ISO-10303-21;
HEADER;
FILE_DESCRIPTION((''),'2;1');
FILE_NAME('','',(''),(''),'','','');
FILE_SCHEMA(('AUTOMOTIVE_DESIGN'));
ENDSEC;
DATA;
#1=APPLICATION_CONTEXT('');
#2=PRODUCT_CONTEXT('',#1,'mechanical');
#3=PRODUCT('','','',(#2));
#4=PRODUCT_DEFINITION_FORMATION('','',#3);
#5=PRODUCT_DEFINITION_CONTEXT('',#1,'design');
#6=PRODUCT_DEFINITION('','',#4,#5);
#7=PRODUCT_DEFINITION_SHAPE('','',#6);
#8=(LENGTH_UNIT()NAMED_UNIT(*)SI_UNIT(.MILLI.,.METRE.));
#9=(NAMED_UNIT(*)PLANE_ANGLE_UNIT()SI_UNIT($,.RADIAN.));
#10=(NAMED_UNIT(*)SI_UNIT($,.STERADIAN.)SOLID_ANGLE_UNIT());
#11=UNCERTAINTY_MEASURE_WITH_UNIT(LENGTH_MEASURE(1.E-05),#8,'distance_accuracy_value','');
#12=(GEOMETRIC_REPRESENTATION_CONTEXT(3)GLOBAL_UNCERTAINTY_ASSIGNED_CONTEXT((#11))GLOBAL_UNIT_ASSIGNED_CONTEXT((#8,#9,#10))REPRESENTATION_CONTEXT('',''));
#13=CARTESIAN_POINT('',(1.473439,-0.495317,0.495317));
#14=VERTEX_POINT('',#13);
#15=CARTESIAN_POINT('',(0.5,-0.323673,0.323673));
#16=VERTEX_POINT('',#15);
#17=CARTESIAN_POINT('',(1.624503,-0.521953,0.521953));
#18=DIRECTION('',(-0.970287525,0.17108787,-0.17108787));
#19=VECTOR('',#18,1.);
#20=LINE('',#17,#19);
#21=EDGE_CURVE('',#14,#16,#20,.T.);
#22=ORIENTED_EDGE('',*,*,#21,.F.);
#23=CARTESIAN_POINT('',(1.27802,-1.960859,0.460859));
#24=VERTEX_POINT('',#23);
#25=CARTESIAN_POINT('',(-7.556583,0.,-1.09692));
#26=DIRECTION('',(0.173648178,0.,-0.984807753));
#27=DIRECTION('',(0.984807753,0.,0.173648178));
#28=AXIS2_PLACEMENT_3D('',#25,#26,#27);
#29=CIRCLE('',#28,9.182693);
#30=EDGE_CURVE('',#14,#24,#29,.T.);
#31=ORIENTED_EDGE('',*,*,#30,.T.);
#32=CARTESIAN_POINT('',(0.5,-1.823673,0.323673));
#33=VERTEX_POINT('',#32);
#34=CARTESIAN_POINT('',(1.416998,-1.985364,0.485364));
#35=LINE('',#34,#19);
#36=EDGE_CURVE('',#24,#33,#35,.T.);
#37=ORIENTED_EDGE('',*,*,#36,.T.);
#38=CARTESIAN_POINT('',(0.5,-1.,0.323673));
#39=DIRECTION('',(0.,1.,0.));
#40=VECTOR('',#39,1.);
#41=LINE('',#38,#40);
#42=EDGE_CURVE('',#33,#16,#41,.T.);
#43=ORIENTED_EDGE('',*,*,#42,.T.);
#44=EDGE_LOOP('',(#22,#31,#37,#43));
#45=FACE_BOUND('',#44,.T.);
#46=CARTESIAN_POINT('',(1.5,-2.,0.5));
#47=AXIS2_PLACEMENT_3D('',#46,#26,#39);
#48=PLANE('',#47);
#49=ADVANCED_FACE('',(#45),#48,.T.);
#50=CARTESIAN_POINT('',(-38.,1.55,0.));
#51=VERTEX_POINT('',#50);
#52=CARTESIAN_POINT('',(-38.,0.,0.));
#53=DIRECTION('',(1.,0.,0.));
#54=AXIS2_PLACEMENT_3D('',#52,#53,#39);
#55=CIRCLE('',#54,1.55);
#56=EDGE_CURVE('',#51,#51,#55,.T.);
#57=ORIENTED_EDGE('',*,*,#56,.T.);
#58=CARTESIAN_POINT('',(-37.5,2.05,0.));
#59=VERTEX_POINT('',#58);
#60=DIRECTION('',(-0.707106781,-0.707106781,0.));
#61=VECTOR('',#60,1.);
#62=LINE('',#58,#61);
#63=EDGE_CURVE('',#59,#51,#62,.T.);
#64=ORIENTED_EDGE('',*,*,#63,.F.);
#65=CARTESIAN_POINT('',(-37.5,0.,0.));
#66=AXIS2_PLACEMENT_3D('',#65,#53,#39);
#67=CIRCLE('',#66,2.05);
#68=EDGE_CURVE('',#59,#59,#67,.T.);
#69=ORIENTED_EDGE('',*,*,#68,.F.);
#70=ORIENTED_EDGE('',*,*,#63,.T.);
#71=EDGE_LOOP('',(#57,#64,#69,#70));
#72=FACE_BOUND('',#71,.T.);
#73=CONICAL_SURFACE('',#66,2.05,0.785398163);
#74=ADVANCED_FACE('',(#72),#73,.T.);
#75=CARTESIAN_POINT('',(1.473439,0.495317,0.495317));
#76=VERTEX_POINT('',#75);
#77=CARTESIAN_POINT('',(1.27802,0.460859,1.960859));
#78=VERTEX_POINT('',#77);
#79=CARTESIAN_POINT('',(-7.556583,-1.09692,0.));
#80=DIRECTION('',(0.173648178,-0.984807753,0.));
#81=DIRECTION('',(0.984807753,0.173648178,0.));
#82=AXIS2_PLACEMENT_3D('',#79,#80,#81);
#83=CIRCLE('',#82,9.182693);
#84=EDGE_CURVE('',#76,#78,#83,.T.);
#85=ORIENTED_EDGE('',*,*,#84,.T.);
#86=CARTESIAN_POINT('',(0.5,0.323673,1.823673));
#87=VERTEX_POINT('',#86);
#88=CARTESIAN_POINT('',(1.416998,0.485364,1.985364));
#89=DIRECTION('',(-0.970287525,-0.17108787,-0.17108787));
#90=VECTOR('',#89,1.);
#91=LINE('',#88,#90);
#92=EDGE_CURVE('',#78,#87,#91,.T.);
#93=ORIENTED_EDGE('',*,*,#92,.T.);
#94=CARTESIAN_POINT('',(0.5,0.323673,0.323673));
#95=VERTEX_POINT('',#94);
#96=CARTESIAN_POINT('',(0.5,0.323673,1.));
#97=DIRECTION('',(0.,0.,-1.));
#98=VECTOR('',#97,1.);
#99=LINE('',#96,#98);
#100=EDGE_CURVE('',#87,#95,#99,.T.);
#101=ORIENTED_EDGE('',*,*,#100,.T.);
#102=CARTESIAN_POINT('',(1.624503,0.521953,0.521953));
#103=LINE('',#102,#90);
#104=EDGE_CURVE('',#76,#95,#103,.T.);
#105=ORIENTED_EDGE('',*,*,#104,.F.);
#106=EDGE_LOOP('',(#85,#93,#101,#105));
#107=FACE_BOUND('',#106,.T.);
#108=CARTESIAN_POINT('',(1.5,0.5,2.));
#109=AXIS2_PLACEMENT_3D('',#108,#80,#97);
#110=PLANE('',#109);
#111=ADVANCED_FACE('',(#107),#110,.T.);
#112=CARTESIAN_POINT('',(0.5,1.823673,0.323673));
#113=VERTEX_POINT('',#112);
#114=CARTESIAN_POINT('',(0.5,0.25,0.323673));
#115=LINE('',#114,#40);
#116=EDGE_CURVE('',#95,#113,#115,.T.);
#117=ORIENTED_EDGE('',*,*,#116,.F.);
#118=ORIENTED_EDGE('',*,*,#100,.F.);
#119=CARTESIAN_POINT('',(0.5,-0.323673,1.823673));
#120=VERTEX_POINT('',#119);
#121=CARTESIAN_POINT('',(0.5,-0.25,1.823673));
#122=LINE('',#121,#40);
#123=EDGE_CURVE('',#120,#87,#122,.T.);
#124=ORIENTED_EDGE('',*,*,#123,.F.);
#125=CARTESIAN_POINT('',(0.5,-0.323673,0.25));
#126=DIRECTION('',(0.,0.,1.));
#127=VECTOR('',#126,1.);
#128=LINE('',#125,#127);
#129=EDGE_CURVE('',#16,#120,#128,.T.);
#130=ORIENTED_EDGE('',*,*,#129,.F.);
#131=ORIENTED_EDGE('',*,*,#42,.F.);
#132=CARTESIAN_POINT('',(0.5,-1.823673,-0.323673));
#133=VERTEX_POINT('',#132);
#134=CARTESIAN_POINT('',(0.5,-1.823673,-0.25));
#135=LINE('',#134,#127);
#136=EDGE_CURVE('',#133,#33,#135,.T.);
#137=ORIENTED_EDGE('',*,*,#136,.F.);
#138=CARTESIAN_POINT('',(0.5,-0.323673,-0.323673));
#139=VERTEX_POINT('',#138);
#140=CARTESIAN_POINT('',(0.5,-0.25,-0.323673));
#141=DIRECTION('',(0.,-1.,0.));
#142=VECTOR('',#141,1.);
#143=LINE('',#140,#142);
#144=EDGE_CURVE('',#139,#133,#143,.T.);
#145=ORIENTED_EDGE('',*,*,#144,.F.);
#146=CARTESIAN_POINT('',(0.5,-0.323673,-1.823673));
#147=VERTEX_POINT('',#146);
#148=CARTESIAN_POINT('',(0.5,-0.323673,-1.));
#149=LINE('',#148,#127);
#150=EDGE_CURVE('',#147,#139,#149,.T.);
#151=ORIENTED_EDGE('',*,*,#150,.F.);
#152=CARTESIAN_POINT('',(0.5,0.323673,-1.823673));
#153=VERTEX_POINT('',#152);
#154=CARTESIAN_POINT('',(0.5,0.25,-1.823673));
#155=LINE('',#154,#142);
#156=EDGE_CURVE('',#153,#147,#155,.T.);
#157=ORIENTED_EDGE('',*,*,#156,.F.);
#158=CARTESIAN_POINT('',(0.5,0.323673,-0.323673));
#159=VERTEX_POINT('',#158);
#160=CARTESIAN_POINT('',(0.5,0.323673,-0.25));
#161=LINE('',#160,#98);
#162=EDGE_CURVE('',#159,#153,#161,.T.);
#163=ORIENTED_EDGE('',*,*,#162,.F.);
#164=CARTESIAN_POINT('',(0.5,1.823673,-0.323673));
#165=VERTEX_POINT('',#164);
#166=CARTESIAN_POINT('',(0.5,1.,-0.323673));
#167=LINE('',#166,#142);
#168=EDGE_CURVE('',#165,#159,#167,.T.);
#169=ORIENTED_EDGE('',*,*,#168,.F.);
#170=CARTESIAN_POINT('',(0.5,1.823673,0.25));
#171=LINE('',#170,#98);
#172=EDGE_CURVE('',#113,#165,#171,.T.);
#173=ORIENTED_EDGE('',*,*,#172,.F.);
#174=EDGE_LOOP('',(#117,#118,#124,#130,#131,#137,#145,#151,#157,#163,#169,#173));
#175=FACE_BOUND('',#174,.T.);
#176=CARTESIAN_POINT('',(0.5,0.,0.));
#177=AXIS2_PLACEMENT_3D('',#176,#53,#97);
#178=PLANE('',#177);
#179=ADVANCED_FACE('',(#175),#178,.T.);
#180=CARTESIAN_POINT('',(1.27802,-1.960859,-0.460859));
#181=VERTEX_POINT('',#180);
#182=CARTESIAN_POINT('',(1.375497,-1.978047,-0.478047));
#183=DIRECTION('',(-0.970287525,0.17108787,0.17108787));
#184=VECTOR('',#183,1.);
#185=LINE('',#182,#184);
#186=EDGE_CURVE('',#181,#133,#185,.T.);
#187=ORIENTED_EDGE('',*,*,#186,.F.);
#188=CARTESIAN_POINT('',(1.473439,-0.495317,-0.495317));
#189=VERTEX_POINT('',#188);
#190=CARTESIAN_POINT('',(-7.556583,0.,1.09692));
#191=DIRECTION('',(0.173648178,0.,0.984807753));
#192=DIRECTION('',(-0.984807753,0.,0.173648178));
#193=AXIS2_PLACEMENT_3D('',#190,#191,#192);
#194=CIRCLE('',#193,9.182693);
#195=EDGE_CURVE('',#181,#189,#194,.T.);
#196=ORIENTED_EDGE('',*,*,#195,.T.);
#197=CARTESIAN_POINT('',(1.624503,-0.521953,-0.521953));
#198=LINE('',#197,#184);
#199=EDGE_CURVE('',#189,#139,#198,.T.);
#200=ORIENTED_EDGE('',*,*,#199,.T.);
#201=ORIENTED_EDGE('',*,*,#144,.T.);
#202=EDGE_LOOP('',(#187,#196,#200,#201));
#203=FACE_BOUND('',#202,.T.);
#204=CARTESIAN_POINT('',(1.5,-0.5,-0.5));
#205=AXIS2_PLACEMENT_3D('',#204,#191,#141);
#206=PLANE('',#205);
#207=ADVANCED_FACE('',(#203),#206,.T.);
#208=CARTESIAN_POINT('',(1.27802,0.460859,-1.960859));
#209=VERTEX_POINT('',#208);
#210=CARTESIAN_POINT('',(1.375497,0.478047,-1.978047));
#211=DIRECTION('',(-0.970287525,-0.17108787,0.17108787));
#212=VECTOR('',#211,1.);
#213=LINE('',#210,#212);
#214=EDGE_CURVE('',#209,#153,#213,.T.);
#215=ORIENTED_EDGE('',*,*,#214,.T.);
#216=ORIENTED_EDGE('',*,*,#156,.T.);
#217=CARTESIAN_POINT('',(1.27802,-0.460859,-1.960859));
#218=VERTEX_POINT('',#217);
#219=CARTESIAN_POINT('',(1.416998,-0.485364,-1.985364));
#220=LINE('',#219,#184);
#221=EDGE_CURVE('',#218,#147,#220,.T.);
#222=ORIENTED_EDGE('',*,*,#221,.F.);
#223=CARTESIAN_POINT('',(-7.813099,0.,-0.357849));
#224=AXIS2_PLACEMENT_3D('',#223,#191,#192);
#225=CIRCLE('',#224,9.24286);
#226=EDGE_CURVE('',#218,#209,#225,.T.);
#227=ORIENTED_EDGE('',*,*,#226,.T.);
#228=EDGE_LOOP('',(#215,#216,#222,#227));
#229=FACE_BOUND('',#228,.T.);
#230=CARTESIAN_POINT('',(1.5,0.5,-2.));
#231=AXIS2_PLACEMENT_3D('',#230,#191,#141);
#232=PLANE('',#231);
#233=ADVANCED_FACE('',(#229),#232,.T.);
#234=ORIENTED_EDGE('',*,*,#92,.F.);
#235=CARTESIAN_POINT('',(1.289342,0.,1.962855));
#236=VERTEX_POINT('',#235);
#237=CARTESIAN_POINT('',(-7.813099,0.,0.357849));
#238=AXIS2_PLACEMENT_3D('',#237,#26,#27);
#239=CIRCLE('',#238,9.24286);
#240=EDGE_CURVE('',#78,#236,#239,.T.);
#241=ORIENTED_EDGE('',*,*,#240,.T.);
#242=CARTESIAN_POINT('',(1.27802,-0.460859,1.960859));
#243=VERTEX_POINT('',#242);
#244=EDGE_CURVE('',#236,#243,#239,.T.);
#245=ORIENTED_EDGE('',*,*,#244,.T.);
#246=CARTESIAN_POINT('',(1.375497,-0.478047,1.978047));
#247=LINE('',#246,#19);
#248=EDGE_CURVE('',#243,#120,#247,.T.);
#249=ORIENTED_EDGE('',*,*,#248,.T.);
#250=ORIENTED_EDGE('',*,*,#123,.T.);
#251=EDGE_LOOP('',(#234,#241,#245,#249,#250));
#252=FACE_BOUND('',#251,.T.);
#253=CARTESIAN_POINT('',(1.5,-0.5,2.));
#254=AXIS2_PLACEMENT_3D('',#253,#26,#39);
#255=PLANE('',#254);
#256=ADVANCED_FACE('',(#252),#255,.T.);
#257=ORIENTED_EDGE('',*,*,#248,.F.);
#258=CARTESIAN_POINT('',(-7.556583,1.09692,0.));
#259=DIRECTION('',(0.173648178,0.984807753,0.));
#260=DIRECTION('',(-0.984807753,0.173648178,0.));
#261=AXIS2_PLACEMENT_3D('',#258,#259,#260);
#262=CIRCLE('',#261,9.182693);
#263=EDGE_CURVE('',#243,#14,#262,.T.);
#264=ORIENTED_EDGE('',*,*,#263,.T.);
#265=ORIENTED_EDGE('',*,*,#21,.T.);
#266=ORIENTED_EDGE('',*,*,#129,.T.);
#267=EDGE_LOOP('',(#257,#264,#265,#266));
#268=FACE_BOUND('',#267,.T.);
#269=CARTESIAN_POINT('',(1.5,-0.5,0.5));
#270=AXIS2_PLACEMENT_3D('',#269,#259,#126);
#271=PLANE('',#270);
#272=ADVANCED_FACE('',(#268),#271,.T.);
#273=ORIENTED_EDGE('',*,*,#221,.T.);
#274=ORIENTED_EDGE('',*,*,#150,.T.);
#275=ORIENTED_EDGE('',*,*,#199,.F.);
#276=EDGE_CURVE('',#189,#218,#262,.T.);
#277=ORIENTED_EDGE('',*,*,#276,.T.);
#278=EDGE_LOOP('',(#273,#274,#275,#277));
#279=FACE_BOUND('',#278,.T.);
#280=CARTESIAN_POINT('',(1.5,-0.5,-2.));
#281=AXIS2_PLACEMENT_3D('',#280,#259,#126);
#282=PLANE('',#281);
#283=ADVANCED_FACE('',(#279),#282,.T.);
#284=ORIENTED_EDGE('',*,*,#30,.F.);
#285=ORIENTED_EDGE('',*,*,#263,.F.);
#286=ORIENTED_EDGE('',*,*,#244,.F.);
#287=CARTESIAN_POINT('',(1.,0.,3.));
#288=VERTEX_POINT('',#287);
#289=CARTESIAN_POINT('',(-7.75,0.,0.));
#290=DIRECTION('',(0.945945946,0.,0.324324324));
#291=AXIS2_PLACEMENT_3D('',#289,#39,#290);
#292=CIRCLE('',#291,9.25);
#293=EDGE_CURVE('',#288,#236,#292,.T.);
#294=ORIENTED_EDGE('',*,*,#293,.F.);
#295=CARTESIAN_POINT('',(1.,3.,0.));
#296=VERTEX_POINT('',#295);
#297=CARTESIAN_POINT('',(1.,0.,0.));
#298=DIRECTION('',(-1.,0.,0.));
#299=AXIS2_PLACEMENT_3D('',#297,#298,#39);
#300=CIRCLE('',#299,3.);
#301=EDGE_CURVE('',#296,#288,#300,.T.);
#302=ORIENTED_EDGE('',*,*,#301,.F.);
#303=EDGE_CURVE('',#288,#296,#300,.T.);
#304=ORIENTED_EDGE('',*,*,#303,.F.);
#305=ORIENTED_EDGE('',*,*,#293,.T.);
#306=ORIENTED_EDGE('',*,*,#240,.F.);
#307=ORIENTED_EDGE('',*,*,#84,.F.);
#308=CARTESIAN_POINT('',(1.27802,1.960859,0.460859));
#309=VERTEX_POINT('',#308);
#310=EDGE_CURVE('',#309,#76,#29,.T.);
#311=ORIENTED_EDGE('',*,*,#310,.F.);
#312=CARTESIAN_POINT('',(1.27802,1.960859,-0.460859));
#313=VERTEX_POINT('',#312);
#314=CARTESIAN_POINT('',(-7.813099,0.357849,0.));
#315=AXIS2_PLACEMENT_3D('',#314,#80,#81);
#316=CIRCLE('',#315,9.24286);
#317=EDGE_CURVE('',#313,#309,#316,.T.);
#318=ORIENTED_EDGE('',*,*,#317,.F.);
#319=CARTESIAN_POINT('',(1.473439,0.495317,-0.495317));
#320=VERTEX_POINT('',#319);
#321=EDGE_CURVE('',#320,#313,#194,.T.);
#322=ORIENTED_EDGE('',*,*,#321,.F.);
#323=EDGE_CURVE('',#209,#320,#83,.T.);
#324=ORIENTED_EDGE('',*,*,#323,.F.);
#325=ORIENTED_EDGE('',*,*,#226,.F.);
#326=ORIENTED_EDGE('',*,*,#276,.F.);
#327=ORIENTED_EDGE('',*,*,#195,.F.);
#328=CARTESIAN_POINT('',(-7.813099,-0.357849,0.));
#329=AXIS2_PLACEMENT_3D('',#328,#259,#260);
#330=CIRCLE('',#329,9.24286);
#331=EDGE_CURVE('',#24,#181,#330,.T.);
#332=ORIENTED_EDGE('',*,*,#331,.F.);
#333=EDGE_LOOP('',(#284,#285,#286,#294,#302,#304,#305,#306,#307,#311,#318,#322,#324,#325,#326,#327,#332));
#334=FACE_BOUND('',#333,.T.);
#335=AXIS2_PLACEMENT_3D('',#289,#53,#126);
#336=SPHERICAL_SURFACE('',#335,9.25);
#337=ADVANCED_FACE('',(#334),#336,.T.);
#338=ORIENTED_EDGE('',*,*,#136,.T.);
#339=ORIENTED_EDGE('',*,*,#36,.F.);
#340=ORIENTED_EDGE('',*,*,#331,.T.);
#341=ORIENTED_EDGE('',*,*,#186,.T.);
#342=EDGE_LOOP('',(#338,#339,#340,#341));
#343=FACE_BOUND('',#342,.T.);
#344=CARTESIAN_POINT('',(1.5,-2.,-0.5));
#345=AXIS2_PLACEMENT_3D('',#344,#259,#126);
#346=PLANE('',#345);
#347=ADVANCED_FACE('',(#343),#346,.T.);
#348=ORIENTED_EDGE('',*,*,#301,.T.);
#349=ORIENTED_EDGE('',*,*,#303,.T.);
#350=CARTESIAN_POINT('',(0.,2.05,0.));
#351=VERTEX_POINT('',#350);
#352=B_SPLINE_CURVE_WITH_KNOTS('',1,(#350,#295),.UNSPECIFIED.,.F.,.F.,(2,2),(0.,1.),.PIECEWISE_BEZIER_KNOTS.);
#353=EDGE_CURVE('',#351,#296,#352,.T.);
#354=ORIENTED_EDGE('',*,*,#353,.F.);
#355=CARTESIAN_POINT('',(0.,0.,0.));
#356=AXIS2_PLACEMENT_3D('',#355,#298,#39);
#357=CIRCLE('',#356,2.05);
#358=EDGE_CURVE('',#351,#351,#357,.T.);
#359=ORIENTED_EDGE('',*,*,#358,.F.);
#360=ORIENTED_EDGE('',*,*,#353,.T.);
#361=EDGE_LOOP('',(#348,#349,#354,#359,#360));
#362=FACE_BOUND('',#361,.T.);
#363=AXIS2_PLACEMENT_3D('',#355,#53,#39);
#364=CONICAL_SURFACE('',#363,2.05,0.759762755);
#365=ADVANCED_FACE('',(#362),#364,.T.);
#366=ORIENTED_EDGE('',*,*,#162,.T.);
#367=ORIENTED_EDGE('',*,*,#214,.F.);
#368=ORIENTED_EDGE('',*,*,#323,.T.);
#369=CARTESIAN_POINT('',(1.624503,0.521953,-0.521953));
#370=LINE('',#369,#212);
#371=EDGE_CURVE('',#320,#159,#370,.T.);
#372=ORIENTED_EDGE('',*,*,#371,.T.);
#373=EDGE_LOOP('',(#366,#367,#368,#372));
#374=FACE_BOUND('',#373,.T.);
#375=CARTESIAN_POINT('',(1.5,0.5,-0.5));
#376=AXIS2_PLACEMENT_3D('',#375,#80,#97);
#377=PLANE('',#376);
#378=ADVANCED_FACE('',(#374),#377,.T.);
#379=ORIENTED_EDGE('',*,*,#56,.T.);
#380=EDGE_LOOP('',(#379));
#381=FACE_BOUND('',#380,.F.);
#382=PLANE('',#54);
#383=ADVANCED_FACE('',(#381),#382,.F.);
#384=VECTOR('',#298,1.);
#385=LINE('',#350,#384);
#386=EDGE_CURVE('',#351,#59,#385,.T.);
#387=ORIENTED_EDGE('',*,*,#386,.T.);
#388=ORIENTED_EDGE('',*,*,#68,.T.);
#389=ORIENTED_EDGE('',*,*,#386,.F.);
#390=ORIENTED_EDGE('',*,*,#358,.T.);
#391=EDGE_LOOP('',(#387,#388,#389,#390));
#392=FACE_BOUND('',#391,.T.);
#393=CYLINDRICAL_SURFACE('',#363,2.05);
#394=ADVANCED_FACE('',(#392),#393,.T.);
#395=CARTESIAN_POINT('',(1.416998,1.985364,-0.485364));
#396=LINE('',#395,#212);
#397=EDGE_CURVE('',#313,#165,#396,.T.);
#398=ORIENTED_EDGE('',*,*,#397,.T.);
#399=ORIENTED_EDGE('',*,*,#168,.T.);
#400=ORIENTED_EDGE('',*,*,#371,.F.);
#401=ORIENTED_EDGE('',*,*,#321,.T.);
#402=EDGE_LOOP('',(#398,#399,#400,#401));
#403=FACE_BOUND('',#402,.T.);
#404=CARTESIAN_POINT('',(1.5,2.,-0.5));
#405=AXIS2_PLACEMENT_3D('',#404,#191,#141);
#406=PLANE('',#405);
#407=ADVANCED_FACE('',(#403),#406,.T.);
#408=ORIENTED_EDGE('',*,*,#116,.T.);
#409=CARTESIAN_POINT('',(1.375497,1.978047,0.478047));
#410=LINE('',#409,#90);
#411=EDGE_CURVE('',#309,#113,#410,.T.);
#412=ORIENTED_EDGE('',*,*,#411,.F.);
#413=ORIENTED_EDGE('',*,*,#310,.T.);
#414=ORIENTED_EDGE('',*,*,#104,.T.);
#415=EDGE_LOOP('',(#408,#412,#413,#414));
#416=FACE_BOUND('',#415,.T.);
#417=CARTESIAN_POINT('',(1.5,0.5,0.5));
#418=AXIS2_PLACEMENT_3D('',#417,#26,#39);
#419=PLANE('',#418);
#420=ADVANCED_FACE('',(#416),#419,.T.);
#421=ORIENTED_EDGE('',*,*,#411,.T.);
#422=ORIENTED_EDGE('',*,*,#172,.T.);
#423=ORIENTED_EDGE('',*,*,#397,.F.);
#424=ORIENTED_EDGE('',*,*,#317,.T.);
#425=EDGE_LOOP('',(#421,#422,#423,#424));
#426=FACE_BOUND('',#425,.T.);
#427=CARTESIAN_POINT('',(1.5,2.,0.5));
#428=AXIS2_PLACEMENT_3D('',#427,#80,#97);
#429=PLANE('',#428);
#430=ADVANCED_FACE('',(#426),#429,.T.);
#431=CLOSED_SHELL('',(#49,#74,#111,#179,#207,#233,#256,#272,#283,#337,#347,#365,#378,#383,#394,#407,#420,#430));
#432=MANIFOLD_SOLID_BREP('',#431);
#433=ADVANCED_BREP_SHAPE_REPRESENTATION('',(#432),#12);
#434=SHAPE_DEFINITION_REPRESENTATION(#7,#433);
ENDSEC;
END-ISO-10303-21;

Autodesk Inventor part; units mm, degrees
ref_plane "YZ Plane" through (0, 0, 0) normal (1, 0, 0) x (0, 1, 0)
ref_plane "XZ Plane" through (0, 0, 0) normal (0, 1, 0) x (-1, 0, 0)
sketch "Sketch1" plane through (0, 0, 0) normal (1, 0, 0) x (0, 1, 0)
  circle A0 centre (0, 0) radius 2.05
  dimension "d0" = 4.1
extrude "Extrusion1" add sketch "Sketch1" against normal blind 38
ref_plane "Work Plane1" through (1, 0, 0) normal (1, 0, 0) x (0, 0, -1)
sketch "Sketch2" plane through (1, 0, 0) normal (1, 0, 0) x (0, 0, -1)
  circle A0 centre (0, 0) radius 3
  dimension "d4" = 6
loft "Loft1" add profiles "Sketch2" section 1 edges at (0, -2.05, 0)
sketch "Sketch3" plane through (0, 0, 0) normal (0, 1, 0) x (-1, 0, 0)
  line L0 (-1, -3) -> (-1, 3) projected
  line L1 (-1, 3) -> (-1, 0)
  line L2 (-1, 0) -> (-1.5, 0)
  arc A0 (-1, 3) -> (-1.5, 0) centre (7.75, 0) ccw
  point P0 (0, 0)
  dimension "d9" = 0.5
revolve "Revolution1" add sketch "Sketch3" angle 360 about axis through (1, 0, 0) along (1, 0, 0)
ref_plane "Work Plane2" through (1.5, 0, 0) normal (1, 0, 0) x (0, 0, -1)
sketch "Sketch4" plane through (1.5, 0, 0) normal (1, 0, 0) x (0, 0, -1)
  line L0 (2, 0.5) -> (2, -0.5)
  line L1 (-2, -0.5) -> (-2, 0.5)
  line L2 (-0.5, 2) -> (0.5, 2)
  line L3 (0.5, -2) -> (-0.5, -2)
  line L4 (2, -0.5) -> (0.5, -0.5)
  line L5 (-0.5, -0.5) -> (-2, -0.5)
  line L6 (-0.5, -2) -> (-0.5, -0.5)
  line L7 (-0.5, 0.5) -> (-0.5, 2)
  line L8 (-2, 0.5) -> (-0.5, 0.5)
  line L9 (0.5, 0.5) -> (2, 0.5)
  line L10 (0.5, 2) -> (0.5, 0.5)
  line L11 (0.5, -0.5) -> (0.5, -2)
  dimension "d12" = 4
  dimension "d13" = 1
  dimension "d14" = 1
  dimension "d15" = 4
extrude "Extrusion2" cut sketch "Sketch4" against normal blind 1 draft -10
chamfer "Chamfer1" distance 0.5 angle 45 1 edges at (-38, -2.05, 0)
thread "Thread1" size "M4.5x0.75" class "6g" standard "ANSI Metric M Profile" length 15
properties part number "Parafuso do Braço (2)"
